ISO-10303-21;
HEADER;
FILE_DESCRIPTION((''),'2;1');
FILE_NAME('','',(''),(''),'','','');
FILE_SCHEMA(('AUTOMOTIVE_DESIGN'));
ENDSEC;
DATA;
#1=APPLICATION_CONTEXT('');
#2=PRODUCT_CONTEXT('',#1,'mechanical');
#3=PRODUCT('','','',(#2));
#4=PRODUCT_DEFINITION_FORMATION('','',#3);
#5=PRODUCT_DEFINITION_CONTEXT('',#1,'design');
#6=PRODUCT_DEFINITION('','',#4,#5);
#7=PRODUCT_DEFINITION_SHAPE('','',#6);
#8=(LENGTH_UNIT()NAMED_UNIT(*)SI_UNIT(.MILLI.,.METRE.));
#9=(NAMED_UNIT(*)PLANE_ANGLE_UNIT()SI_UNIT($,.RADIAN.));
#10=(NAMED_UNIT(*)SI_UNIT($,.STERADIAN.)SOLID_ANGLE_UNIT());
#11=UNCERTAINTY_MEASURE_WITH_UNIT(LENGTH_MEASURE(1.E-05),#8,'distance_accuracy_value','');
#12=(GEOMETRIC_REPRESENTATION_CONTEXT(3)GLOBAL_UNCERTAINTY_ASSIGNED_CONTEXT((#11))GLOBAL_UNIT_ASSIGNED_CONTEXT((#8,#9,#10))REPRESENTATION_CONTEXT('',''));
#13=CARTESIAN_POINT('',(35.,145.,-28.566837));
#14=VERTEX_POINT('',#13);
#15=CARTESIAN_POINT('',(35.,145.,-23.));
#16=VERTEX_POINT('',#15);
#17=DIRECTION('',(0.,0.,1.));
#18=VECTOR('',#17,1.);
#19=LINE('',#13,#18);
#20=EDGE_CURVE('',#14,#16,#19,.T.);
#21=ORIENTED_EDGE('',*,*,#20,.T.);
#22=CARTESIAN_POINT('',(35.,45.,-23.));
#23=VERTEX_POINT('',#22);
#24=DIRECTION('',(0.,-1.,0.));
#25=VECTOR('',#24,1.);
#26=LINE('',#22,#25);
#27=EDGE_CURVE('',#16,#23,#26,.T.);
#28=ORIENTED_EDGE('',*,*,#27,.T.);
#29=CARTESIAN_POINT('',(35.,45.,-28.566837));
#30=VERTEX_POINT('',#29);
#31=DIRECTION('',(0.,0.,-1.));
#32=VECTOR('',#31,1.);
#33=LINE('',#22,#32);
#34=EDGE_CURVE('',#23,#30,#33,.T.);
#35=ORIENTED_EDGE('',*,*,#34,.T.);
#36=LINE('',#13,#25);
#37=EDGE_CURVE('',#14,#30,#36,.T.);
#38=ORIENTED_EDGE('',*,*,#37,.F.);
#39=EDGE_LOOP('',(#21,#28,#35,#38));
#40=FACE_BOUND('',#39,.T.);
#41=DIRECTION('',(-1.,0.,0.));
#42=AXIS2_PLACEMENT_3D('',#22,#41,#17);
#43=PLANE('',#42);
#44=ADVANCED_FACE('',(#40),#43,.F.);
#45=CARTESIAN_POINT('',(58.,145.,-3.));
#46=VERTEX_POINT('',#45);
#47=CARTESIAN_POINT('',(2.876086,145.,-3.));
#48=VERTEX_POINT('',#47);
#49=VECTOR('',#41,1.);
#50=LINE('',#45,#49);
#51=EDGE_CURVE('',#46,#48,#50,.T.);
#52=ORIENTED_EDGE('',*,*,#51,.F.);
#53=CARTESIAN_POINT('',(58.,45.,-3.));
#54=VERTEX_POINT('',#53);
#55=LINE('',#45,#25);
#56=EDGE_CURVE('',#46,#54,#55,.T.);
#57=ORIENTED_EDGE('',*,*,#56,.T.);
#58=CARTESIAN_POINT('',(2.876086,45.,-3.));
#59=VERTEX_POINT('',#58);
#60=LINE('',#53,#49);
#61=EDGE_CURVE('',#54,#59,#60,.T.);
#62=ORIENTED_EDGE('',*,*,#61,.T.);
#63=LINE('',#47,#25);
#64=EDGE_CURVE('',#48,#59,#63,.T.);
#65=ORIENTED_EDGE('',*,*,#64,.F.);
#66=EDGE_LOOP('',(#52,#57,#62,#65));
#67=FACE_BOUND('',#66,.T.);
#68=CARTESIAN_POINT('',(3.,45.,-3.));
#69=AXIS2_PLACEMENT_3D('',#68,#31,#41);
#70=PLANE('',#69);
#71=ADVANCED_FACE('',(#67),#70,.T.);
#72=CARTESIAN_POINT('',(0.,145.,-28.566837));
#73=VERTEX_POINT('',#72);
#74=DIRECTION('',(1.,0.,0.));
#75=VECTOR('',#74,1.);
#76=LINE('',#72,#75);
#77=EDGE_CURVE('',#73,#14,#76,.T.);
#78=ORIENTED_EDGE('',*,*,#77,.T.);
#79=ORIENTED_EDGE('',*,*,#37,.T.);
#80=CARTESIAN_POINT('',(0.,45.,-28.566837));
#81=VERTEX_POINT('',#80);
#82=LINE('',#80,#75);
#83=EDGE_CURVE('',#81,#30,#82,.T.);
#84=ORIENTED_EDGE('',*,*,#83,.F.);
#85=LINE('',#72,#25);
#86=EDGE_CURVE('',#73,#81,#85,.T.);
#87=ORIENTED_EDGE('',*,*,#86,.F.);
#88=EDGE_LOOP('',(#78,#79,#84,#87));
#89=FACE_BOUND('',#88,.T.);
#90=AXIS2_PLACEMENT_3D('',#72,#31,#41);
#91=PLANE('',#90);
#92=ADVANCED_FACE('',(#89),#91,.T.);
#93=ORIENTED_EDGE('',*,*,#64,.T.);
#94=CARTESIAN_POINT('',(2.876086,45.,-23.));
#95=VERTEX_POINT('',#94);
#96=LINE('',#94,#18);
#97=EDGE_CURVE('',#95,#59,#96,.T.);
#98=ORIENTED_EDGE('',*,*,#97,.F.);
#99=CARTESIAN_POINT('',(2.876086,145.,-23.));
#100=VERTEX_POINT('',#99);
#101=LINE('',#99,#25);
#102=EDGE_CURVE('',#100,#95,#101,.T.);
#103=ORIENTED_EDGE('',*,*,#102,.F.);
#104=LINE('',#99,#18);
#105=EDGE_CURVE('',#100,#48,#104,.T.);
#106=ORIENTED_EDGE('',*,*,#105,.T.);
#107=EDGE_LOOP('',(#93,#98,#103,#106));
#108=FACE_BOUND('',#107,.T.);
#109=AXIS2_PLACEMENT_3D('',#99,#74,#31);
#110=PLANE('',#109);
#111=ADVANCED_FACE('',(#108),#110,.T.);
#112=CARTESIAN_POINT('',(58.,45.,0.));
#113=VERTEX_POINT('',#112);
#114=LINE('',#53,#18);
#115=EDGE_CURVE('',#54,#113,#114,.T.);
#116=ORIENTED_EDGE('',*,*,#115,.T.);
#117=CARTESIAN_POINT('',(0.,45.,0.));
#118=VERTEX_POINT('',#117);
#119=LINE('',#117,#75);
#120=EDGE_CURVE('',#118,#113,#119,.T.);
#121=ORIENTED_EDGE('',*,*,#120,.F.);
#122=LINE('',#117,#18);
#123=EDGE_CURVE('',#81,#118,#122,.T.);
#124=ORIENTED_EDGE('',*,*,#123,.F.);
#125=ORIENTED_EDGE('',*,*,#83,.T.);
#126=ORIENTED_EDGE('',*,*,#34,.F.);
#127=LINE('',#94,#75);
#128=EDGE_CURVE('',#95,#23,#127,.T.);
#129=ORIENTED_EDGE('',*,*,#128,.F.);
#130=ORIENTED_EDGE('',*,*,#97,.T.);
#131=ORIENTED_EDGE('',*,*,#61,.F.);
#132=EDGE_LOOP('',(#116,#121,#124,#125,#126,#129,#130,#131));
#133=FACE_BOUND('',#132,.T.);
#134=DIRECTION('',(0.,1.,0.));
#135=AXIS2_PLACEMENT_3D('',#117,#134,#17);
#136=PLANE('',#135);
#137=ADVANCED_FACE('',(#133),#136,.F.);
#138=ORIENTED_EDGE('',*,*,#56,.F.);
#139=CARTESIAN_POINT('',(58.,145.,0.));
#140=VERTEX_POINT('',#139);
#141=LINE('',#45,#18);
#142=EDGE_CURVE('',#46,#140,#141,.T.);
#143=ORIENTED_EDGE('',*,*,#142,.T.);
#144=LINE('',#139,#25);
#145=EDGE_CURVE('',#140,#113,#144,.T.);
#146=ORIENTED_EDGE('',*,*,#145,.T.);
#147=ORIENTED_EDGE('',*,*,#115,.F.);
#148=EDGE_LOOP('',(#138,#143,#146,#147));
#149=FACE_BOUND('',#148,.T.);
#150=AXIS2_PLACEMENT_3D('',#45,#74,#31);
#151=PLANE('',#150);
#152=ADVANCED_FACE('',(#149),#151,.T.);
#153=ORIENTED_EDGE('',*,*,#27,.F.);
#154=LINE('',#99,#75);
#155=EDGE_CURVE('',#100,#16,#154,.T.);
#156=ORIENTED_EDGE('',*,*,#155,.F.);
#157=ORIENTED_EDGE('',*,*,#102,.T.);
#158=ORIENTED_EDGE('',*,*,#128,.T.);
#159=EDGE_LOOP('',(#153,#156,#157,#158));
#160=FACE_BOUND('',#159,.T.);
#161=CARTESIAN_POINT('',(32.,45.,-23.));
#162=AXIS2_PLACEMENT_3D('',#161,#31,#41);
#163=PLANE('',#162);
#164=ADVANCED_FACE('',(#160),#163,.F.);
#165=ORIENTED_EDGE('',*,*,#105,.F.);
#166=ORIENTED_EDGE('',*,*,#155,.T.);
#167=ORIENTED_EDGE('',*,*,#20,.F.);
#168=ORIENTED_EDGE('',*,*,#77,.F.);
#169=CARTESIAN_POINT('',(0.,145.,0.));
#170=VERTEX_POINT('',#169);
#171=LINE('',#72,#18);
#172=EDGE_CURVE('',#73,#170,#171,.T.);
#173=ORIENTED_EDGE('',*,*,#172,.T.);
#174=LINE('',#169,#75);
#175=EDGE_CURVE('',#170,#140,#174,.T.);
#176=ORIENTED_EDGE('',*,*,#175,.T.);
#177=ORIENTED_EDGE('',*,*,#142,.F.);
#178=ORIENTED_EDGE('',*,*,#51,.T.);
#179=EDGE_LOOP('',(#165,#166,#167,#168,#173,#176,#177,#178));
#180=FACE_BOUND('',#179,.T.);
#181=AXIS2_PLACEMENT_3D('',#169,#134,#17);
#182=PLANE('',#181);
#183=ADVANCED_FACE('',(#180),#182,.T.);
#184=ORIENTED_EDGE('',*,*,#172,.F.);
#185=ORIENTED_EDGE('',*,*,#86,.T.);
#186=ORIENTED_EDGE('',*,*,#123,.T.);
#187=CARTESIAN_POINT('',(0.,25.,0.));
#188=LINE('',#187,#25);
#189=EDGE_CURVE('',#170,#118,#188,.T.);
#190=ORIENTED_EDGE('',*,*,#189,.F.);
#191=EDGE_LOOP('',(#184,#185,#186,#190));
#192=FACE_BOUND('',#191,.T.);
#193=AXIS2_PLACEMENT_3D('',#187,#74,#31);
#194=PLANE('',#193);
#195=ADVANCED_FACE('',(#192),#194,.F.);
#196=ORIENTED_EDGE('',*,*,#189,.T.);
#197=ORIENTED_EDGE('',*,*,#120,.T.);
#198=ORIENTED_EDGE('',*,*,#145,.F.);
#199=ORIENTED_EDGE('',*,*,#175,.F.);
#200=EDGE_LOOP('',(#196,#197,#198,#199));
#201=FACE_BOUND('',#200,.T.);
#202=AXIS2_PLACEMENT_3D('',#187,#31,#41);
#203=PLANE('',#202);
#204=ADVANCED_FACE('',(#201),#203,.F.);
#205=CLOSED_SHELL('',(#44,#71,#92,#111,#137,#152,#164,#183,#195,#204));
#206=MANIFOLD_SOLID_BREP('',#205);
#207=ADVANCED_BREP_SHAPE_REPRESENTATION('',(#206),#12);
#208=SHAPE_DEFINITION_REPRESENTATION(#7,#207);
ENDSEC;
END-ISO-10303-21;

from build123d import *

# Parameters (mm, degrees)
SKETCH2_W           = 106
SKETCH2_H           = 106
SKETCH2_R           = 4
SKETCH2_R_2         = 6
BOSS_EXTRUDE1_DEPTH = 25
SKETCH3_W           = 106
SKETCH3_H           = 106
SKETCH3_W_2         = 100
SKETCH3_H_2         = 100
BOSS_EXTRUDE2_DEPTH = 20
SKETCH5_W           = 3
SKETCH5_H           = 23
BOSS_EXTRUDE3_DEPTH = 20
SKETCH7_W           = 20
SKETCH7_H           = 3
BOSS_EXTRUDE4_DEPTH = 20
SKETCH9_R           = 9.905763918
CUT_EXTRUDE1_DEPTH  = 10
SKETCH10_W          = 10
SKETCH10_H          = 4
BOSS_EXTRUDE5_DEPTH = 10
SKETCH11_W          = 10
SKETCH11_H          = 4
BOSS_EXTRUDE6_DEPTH = 10
FILLET2_RADIUS      = 5
FILLET2_LENGTH      = 4
FILLET3_R           = 5
FILLET4_R           = 5
FILLET5_R           = 5
SKETCH13_R          = 1.6
CUT_EXTRUDE2_DEPTH  = 163.397660082
SKETCH14_W          = 35.96051594
SKETCH14_H          = 7.693498276
CUT_EXTRUDE3_DEPTH  = 30
BOSS_EXTRUDE7_DEPTH = 100
SKETCH21_W          = 151.44967638
SKETCH21_H          = 134.741704964
CUT_EXTRUDE6_DEPTH  = 187.257885739


with BuildPart() as part:
    # Sketch2 → Boss-Extrude1 (new body)
    with BuildSketch(Plane(origin=(0, 0, 0), x_dir=(1, 0, 0), z_dir=(0, 1, 0))):
        with Locations((53, 53)):
            Rectangle(SKETCH2_W, SKETCH2_H)
        with Locations(Location((18, 15, 0), (0, 0, 270))):
            Circle(SKETCH2_R, mode=Mode.SUBTRACT)
        with Locations(Location((92, 13.5, 0), (0, 0, 270))):
            Circle(SKETCH2_R_2, mode=Mode.SUBTRACT)
    extrude(amount=BOSS_EXTRUDE1_DEPTH)

    # Sketch3 → Boss-Extrude2 (add)
    with BuildSketch(Plane(origin=(0, 25, 0), x_dir=(1, 0, 0), z_dir=(0, 1, 0))):
        with Locations((53, 53)):
            Rectangle(SKETCH3_W, SKETCH3_H)
        with Locations((53, 53)):
            Rectangle(SKETCH3_W_2, SKETCH3_H_2, mode=Mode.SUBTRACT)
    extrude(amount=BOSS_EXTRUDE2_DEPTH)

    # Sketch5 → Boss-Extrude3 (add)
    with BuildSketch(Plane(origin=(0, 25, 0), x_dir=(1, 0, 0), z_dir=(0, 1, 0))):
        Polygon((3, 28), (3, 25), (32, 25), (32, 23), (35, 23), (35, 43), (32, 43), (32, 28), align=None)
        Polygon((83, 52.5), (83, 26.5), (76, 26.5), (76, 3), (73, 3), (73, 29.5), (80, 29.5), (80, 49.5), (73, 49.5), (73, 52.5), align=None)
        Polygon((3, 63), (3, 60), (25, 60), (25, 80), (22, 80), (22, 63), align=None)
        with Locations((59.5, 14.5)):
            Rectangle(SKETCH5_W, SKETCH5_H)
    extrude(amount=BOSS_EXTRUDE3_DEPTH)

    # Sketch7 → Boss-Extrude4 (add)
    with BuildSketch(Plane(origin=(0, 25, 0), x_dir=(1, 0, 0), z_dir=(0, 1, 0))):
        Polygon((50, 70.496538655), (53, 70.496538655), (53, 73.496538655), (53, 83.496538655), (50, 83.496538655), align=None)
        with Locations((63, 71.996538655)):
            Rectangle(SKETCH7_W, SKETCH7_H)
        Polygon((73, 70.496538655), (73, 52.5), (76, 52.5), (76, 82.5), (73, 82.5), (73, 73.496538655), align=None)
    extrude(amount=BOSS_EXTRUDE4_DEPTH)

    # Sketch9 → Cut-Extrude1 (cut)
    with BuildSketch(Plane(origin=(0, 25, 0), x_dir=(1, 0, 0), z_dir=(0, 1, 0))):
        with Locations(Location((92, 13.5, 0), (0, 0, 270))):
            Circle(SKETCH9_R)
    extrude(amount=-CUT_EXTRUDE1_DEPTH, mode=Mode.SUBTRACT)

    # Sketch10 → Boss-Extrude5 (add)
    with BuildSketch(Plane.XY):
        with Locations((53, 2)):
            Rectangle(SKETCH10_W, SKETCH10_H)
    extrude(amount=BOSS_EXTRUDE5_DEPTH)

    # Sketch11 → Boss-Extrude6 (add)
    with BuildSketch(Plane(origin=(0, 0, -106), x_dir=(-1, 0, 0), z_dir=(0, 0, -1))):
        with Locations((-53, 2)):
            Rectangle(SKETCH11_W, SKETCH11_H)
    extrude(amount=BOSS_EXTRUDE6_DEPTH)

    # Fillet2: full round fillet: the end face becomes a half cylinder, R = half its width
    fillet2_face = Plane((53, 2, -116), x_dir=(0, -1, 0), z_dir=(0, 0, -1))  # on the end face: x along it, z out of the body
    fillet2_slab = fillet2_face.offset(-FILLET2_RADIUS / 2) * Box(FILLET2_LENGTH, 2 * FILLET2_RADIUS, FILLET2_RADIUS, mode=Mode.PRIVATE)  # the body's end, R deep
    fillet2_round = Plane((53, 2, -111), x_dir=(0, 0, -1), z_dir=(0, -1, 0)) * Cylinder(FILLET2_RADIUS, FILLET2_LENGTH, mode=Mode.PRIVATE)  # its axis R under the face
    add(fillet2_slab - fillet2_round, mode=Mode.SUBTRACT)

    # Fillet3
    fillet3_edges = [part.edges().sort_by_distance(p)[0] for p in [
        (48, 2, -106),
        (58, 2, -106),
    ]]
    fillet(fillet3_edges, radius=FILLET3_R - 0.0001)  # a hair under: the kernel refuses the full size

    # Fillet4
    fillet4_edges = [part.edges().sort_by_distance(p)[0] for p in [
        (48, 2, 0),
        (58, 2, 0),
    ]]
    fillet(fillet4_edges, radius=FILLET4_R)

    # Fillet5
    fillet5_edges = [part.edges().sort_by_distance(p)[0] for p in [
        (48, 2, 10),
        (58, 2, 10),
    ]]
    fillet(fillet5_edges, radius=FILLET5_R - 0.0001)  # a hair under: the kernel refuses the full size

    # Sketch13 → Cut-Extrude2 (cut, through all)
    with BuildSketch(Plane(origin=(0, 4, 0), x_dir=(1, 0, 0), z_dir=(0, 1, 0))):
        with Locations(Location((53, -5, 0), (0, 0, 180))):
            Circle(SKETCH13_R)
        with Locations(Location((53, 111, 0), (0, 0, 180))):
            Circle(SKETCH13_R)
    extrude(amount=-CUT_EXTRUDE2_DEPTH, mode=Mode.SUBTRACT)

    # Sketch14 → Cut-Extrude3 (cut)
    with BuildSketch(Plane.XY):
        with Locations((88.01974203, 3.846749138)):
            Rectangle(SKETCH14_W, SKETCH14_H)
    extrude(amount=-CUT_EXTRUDE3_DEPTH, mode=Mode.SUBTRACT)

    # Sketch15 → Boss-Extrude7 (add)
    with BuildSketch(Plane(origin=(0, 45, 0), x_dir=(1, 0, 0), z_dir=(0, 1, 0))):
        Polygon((0, 28.5668375), (0, 0), (2.876085753, 0), (58, 0), (58, 3), (2.876085753, 3), (2.876085753, 23), (35, 23), (35, 28.5668375), align=None)
    extrude(amount=BOSS_EXTRUDE7_DEPTH)

    # Sketch21 → Cut-Extrude6 (cut, through all)
    with BuildSketch(Plane(origin=(0, 45, 0), x_dir=(1, 0, 0), z_dir=(0, 1, 0))):
        with Locations((51.832238557, 52.101721967)):
            Rectangle(SKETCH21_W, SKETCH21_H)
    extrude(amount=-CUT_EXTRUDE6_DEPTH, mode=Mode.SUBTRACT)


solid = part.part
